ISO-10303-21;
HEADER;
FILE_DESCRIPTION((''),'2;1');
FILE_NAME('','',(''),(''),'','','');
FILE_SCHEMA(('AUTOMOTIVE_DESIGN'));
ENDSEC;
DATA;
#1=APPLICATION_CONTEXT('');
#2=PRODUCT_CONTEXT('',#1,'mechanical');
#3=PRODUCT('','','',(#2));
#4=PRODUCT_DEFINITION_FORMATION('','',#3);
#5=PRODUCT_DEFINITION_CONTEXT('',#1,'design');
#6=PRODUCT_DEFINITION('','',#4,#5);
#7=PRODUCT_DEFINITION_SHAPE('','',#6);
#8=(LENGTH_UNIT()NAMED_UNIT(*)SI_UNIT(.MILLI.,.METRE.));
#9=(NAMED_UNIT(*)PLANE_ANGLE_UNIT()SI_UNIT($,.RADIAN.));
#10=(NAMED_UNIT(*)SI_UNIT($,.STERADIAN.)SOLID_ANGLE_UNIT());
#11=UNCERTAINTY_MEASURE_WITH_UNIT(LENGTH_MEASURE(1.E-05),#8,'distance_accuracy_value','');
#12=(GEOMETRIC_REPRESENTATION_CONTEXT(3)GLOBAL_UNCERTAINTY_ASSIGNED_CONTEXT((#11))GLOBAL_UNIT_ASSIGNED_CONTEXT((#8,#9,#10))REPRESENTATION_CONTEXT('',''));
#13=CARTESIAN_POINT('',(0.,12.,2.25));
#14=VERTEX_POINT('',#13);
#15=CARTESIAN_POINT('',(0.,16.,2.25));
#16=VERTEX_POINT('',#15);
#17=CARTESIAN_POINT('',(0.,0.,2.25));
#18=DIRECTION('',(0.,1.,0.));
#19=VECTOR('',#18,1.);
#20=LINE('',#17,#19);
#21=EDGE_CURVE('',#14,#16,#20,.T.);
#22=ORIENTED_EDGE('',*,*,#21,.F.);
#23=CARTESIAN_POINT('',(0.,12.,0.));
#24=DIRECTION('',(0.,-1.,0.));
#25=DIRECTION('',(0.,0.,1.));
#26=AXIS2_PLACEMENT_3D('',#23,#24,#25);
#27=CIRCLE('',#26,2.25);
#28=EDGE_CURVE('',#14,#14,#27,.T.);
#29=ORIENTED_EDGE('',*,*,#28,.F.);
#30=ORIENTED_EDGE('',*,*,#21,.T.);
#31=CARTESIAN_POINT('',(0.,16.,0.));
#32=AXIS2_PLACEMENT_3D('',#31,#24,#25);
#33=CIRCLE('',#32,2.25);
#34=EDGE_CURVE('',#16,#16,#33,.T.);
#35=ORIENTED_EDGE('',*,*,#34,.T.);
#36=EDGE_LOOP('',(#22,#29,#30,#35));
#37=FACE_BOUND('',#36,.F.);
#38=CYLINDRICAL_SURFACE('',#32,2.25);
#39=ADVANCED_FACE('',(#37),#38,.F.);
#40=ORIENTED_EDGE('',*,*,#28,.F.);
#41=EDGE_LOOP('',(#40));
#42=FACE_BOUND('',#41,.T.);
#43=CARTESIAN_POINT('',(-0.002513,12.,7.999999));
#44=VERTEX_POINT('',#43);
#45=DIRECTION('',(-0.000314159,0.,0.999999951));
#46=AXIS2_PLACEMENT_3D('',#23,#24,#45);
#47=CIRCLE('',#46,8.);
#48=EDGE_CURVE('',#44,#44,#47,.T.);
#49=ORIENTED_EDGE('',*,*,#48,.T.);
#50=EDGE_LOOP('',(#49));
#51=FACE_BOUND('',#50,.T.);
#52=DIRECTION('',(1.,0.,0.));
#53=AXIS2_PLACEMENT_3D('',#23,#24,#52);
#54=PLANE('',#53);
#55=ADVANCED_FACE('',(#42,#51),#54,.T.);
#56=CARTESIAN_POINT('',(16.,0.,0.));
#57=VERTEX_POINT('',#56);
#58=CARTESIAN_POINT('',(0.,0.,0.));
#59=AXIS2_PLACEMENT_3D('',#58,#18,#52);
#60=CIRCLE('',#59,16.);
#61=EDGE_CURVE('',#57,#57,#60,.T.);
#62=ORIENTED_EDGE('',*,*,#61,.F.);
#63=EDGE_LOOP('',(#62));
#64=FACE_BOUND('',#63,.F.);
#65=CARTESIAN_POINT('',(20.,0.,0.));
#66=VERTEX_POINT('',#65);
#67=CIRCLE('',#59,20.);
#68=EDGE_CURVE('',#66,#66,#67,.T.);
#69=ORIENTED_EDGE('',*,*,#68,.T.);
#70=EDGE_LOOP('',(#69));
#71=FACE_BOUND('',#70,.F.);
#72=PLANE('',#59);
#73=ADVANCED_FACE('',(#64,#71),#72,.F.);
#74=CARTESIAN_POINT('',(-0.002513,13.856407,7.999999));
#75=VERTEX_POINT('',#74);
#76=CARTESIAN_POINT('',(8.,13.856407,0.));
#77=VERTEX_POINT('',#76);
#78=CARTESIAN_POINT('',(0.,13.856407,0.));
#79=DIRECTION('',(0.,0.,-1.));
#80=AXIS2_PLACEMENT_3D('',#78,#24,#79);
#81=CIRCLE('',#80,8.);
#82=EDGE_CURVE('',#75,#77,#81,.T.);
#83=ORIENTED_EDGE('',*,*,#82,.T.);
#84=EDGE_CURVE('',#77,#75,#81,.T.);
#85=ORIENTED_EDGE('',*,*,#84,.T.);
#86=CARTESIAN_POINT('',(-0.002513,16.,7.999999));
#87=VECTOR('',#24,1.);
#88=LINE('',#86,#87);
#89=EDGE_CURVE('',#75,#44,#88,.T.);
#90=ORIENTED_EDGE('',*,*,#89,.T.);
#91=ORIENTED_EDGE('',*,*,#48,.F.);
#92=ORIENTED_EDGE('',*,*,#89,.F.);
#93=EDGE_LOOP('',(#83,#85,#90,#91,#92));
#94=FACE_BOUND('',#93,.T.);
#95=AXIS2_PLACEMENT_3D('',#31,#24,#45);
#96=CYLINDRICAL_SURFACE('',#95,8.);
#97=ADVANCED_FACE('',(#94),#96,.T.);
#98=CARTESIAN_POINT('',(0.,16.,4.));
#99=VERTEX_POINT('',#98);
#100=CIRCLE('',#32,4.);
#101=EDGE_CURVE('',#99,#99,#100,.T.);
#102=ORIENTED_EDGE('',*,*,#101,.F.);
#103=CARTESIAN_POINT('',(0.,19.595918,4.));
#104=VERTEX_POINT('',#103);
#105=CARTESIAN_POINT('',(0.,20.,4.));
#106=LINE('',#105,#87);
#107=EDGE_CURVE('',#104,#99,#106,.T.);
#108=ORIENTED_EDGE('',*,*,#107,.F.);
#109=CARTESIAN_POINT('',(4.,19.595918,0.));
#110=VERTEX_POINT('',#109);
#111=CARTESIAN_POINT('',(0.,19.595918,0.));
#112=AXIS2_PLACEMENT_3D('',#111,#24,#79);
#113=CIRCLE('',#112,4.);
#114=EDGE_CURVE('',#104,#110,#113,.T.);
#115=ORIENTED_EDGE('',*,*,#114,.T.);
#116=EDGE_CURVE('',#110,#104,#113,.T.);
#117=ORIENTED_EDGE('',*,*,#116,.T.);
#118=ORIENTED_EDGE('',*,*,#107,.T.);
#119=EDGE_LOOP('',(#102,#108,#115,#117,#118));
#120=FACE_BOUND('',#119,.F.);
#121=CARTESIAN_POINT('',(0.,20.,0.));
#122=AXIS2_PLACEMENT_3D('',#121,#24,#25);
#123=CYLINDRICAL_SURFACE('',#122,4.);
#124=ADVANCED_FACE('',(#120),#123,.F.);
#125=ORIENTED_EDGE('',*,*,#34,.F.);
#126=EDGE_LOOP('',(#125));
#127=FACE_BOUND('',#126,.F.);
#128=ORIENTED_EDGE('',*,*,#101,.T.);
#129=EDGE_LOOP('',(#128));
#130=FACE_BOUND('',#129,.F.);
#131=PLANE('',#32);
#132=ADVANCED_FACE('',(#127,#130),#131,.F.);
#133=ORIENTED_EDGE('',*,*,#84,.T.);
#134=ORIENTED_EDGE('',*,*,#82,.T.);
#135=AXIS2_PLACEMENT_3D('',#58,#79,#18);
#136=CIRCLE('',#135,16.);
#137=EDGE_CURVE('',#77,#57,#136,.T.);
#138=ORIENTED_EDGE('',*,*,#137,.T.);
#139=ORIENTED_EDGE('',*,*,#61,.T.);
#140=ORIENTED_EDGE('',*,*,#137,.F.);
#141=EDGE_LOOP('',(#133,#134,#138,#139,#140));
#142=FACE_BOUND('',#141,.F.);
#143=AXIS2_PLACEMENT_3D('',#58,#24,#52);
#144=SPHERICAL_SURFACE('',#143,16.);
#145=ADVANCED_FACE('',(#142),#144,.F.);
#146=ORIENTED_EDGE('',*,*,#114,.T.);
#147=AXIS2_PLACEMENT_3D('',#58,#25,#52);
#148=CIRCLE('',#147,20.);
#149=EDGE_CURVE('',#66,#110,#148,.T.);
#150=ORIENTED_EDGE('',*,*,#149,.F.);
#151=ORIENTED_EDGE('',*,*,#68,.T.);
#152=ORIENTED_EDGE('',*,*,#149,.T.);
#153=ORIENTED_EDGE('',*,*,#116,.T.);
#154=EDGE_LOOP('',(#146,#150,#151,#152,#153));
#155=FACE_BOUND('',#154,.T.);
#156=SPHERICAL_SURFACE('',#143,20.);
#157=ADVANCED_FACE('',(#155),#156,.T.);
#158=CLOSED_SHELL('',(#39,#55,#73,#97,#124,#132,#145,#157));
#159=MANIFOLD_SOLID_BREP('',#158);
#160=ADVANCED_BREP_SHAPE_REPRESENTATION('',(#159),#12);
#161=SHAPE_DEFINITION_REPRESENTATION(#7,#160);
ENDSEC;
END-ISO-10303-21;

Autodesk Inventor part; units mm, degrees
ref_plane "YZ Plane" through (0, 0, 0) normal (1, 0, 0) x (0, 1, 0)
ref_plane "XY Plane" through (0, 0, 0) normal (0, 0, 1) x (1, 0, 0)
sketch "Sketch1" plane through (0, 0, 0) normal (0, 0, 1) x (1, 0, 0)
  line L0 (0, 0) -> (0, 20)
  line L1 (0, 0) -> (20, 0)
  arc A0 (20, 0) -> (0, 20) centre (0, 0) ccw
  line L2 (0, -4.828427) -> (0, 28.970563)
  dimension "d2" = 20
sketch "Sketch1 outline for Revolution1" plane through (0, 0, 0) normal (0, 0, 1) x (1, 0, 0)
  line L0 (0, 0) -> (0, 20)
  arc A0 (0, 20) -> (20, 0) centre (0, 0) cw
  line L1 (20, 0) -> (0, 0)
revolve "Revolution1" add sketch "Sketch1 outline for Revolution1" angle 360 about axis through (0, -10, 0) along (0, 1, 0)
ref_plane "Work Plane1" through (0, 20, 0) normal (0, 1, 0) x (-1, 0, 0)
sketch "Sketch2" plane through (0, 20, 0) normal (0, 1, 0) x (-1, 0, 0)
  point P0 (0, 0)
  point P1 (0, 0)
hole "Hole1" at (0, 20, 0) direction (0, -1, 0) diameter 4.5 end through all counterbore diameter 8 counterbore depth 4 clearance for "Socket Head Cap Screw" size "M4" standard "Ansi Metric M Profile"
shell "Shell1" thickness 4 removed faces 1 at (13.884144, 0, 1.68584)
sketch "Sketch3" plane through (0, 0, 0) normal (0, -1, 0) x (1, 0, 0)
  circle A0 centre (0, 0) radius 2.25 projected
  circle A1 centre (0, 0) radius 6.25 projected
  circle A2 centre (0, 0) radius 2.25 projected
sketch "Sketch3 outline for Extrusion1" plane through (0, 0, 0) normal (0, -1, 0) x (1, 0, 0)
  circle A0 centre (0, 0) radius 6.25
  circle A1 centre (0, 0) radius 2.25
extrude "Extrusion1" cut sketch "Sketch3 outline for Extrusion1" against normal up to surface (12 mm away)
properties part number "Ball_Upper Half" material "Nylon 6/6"
